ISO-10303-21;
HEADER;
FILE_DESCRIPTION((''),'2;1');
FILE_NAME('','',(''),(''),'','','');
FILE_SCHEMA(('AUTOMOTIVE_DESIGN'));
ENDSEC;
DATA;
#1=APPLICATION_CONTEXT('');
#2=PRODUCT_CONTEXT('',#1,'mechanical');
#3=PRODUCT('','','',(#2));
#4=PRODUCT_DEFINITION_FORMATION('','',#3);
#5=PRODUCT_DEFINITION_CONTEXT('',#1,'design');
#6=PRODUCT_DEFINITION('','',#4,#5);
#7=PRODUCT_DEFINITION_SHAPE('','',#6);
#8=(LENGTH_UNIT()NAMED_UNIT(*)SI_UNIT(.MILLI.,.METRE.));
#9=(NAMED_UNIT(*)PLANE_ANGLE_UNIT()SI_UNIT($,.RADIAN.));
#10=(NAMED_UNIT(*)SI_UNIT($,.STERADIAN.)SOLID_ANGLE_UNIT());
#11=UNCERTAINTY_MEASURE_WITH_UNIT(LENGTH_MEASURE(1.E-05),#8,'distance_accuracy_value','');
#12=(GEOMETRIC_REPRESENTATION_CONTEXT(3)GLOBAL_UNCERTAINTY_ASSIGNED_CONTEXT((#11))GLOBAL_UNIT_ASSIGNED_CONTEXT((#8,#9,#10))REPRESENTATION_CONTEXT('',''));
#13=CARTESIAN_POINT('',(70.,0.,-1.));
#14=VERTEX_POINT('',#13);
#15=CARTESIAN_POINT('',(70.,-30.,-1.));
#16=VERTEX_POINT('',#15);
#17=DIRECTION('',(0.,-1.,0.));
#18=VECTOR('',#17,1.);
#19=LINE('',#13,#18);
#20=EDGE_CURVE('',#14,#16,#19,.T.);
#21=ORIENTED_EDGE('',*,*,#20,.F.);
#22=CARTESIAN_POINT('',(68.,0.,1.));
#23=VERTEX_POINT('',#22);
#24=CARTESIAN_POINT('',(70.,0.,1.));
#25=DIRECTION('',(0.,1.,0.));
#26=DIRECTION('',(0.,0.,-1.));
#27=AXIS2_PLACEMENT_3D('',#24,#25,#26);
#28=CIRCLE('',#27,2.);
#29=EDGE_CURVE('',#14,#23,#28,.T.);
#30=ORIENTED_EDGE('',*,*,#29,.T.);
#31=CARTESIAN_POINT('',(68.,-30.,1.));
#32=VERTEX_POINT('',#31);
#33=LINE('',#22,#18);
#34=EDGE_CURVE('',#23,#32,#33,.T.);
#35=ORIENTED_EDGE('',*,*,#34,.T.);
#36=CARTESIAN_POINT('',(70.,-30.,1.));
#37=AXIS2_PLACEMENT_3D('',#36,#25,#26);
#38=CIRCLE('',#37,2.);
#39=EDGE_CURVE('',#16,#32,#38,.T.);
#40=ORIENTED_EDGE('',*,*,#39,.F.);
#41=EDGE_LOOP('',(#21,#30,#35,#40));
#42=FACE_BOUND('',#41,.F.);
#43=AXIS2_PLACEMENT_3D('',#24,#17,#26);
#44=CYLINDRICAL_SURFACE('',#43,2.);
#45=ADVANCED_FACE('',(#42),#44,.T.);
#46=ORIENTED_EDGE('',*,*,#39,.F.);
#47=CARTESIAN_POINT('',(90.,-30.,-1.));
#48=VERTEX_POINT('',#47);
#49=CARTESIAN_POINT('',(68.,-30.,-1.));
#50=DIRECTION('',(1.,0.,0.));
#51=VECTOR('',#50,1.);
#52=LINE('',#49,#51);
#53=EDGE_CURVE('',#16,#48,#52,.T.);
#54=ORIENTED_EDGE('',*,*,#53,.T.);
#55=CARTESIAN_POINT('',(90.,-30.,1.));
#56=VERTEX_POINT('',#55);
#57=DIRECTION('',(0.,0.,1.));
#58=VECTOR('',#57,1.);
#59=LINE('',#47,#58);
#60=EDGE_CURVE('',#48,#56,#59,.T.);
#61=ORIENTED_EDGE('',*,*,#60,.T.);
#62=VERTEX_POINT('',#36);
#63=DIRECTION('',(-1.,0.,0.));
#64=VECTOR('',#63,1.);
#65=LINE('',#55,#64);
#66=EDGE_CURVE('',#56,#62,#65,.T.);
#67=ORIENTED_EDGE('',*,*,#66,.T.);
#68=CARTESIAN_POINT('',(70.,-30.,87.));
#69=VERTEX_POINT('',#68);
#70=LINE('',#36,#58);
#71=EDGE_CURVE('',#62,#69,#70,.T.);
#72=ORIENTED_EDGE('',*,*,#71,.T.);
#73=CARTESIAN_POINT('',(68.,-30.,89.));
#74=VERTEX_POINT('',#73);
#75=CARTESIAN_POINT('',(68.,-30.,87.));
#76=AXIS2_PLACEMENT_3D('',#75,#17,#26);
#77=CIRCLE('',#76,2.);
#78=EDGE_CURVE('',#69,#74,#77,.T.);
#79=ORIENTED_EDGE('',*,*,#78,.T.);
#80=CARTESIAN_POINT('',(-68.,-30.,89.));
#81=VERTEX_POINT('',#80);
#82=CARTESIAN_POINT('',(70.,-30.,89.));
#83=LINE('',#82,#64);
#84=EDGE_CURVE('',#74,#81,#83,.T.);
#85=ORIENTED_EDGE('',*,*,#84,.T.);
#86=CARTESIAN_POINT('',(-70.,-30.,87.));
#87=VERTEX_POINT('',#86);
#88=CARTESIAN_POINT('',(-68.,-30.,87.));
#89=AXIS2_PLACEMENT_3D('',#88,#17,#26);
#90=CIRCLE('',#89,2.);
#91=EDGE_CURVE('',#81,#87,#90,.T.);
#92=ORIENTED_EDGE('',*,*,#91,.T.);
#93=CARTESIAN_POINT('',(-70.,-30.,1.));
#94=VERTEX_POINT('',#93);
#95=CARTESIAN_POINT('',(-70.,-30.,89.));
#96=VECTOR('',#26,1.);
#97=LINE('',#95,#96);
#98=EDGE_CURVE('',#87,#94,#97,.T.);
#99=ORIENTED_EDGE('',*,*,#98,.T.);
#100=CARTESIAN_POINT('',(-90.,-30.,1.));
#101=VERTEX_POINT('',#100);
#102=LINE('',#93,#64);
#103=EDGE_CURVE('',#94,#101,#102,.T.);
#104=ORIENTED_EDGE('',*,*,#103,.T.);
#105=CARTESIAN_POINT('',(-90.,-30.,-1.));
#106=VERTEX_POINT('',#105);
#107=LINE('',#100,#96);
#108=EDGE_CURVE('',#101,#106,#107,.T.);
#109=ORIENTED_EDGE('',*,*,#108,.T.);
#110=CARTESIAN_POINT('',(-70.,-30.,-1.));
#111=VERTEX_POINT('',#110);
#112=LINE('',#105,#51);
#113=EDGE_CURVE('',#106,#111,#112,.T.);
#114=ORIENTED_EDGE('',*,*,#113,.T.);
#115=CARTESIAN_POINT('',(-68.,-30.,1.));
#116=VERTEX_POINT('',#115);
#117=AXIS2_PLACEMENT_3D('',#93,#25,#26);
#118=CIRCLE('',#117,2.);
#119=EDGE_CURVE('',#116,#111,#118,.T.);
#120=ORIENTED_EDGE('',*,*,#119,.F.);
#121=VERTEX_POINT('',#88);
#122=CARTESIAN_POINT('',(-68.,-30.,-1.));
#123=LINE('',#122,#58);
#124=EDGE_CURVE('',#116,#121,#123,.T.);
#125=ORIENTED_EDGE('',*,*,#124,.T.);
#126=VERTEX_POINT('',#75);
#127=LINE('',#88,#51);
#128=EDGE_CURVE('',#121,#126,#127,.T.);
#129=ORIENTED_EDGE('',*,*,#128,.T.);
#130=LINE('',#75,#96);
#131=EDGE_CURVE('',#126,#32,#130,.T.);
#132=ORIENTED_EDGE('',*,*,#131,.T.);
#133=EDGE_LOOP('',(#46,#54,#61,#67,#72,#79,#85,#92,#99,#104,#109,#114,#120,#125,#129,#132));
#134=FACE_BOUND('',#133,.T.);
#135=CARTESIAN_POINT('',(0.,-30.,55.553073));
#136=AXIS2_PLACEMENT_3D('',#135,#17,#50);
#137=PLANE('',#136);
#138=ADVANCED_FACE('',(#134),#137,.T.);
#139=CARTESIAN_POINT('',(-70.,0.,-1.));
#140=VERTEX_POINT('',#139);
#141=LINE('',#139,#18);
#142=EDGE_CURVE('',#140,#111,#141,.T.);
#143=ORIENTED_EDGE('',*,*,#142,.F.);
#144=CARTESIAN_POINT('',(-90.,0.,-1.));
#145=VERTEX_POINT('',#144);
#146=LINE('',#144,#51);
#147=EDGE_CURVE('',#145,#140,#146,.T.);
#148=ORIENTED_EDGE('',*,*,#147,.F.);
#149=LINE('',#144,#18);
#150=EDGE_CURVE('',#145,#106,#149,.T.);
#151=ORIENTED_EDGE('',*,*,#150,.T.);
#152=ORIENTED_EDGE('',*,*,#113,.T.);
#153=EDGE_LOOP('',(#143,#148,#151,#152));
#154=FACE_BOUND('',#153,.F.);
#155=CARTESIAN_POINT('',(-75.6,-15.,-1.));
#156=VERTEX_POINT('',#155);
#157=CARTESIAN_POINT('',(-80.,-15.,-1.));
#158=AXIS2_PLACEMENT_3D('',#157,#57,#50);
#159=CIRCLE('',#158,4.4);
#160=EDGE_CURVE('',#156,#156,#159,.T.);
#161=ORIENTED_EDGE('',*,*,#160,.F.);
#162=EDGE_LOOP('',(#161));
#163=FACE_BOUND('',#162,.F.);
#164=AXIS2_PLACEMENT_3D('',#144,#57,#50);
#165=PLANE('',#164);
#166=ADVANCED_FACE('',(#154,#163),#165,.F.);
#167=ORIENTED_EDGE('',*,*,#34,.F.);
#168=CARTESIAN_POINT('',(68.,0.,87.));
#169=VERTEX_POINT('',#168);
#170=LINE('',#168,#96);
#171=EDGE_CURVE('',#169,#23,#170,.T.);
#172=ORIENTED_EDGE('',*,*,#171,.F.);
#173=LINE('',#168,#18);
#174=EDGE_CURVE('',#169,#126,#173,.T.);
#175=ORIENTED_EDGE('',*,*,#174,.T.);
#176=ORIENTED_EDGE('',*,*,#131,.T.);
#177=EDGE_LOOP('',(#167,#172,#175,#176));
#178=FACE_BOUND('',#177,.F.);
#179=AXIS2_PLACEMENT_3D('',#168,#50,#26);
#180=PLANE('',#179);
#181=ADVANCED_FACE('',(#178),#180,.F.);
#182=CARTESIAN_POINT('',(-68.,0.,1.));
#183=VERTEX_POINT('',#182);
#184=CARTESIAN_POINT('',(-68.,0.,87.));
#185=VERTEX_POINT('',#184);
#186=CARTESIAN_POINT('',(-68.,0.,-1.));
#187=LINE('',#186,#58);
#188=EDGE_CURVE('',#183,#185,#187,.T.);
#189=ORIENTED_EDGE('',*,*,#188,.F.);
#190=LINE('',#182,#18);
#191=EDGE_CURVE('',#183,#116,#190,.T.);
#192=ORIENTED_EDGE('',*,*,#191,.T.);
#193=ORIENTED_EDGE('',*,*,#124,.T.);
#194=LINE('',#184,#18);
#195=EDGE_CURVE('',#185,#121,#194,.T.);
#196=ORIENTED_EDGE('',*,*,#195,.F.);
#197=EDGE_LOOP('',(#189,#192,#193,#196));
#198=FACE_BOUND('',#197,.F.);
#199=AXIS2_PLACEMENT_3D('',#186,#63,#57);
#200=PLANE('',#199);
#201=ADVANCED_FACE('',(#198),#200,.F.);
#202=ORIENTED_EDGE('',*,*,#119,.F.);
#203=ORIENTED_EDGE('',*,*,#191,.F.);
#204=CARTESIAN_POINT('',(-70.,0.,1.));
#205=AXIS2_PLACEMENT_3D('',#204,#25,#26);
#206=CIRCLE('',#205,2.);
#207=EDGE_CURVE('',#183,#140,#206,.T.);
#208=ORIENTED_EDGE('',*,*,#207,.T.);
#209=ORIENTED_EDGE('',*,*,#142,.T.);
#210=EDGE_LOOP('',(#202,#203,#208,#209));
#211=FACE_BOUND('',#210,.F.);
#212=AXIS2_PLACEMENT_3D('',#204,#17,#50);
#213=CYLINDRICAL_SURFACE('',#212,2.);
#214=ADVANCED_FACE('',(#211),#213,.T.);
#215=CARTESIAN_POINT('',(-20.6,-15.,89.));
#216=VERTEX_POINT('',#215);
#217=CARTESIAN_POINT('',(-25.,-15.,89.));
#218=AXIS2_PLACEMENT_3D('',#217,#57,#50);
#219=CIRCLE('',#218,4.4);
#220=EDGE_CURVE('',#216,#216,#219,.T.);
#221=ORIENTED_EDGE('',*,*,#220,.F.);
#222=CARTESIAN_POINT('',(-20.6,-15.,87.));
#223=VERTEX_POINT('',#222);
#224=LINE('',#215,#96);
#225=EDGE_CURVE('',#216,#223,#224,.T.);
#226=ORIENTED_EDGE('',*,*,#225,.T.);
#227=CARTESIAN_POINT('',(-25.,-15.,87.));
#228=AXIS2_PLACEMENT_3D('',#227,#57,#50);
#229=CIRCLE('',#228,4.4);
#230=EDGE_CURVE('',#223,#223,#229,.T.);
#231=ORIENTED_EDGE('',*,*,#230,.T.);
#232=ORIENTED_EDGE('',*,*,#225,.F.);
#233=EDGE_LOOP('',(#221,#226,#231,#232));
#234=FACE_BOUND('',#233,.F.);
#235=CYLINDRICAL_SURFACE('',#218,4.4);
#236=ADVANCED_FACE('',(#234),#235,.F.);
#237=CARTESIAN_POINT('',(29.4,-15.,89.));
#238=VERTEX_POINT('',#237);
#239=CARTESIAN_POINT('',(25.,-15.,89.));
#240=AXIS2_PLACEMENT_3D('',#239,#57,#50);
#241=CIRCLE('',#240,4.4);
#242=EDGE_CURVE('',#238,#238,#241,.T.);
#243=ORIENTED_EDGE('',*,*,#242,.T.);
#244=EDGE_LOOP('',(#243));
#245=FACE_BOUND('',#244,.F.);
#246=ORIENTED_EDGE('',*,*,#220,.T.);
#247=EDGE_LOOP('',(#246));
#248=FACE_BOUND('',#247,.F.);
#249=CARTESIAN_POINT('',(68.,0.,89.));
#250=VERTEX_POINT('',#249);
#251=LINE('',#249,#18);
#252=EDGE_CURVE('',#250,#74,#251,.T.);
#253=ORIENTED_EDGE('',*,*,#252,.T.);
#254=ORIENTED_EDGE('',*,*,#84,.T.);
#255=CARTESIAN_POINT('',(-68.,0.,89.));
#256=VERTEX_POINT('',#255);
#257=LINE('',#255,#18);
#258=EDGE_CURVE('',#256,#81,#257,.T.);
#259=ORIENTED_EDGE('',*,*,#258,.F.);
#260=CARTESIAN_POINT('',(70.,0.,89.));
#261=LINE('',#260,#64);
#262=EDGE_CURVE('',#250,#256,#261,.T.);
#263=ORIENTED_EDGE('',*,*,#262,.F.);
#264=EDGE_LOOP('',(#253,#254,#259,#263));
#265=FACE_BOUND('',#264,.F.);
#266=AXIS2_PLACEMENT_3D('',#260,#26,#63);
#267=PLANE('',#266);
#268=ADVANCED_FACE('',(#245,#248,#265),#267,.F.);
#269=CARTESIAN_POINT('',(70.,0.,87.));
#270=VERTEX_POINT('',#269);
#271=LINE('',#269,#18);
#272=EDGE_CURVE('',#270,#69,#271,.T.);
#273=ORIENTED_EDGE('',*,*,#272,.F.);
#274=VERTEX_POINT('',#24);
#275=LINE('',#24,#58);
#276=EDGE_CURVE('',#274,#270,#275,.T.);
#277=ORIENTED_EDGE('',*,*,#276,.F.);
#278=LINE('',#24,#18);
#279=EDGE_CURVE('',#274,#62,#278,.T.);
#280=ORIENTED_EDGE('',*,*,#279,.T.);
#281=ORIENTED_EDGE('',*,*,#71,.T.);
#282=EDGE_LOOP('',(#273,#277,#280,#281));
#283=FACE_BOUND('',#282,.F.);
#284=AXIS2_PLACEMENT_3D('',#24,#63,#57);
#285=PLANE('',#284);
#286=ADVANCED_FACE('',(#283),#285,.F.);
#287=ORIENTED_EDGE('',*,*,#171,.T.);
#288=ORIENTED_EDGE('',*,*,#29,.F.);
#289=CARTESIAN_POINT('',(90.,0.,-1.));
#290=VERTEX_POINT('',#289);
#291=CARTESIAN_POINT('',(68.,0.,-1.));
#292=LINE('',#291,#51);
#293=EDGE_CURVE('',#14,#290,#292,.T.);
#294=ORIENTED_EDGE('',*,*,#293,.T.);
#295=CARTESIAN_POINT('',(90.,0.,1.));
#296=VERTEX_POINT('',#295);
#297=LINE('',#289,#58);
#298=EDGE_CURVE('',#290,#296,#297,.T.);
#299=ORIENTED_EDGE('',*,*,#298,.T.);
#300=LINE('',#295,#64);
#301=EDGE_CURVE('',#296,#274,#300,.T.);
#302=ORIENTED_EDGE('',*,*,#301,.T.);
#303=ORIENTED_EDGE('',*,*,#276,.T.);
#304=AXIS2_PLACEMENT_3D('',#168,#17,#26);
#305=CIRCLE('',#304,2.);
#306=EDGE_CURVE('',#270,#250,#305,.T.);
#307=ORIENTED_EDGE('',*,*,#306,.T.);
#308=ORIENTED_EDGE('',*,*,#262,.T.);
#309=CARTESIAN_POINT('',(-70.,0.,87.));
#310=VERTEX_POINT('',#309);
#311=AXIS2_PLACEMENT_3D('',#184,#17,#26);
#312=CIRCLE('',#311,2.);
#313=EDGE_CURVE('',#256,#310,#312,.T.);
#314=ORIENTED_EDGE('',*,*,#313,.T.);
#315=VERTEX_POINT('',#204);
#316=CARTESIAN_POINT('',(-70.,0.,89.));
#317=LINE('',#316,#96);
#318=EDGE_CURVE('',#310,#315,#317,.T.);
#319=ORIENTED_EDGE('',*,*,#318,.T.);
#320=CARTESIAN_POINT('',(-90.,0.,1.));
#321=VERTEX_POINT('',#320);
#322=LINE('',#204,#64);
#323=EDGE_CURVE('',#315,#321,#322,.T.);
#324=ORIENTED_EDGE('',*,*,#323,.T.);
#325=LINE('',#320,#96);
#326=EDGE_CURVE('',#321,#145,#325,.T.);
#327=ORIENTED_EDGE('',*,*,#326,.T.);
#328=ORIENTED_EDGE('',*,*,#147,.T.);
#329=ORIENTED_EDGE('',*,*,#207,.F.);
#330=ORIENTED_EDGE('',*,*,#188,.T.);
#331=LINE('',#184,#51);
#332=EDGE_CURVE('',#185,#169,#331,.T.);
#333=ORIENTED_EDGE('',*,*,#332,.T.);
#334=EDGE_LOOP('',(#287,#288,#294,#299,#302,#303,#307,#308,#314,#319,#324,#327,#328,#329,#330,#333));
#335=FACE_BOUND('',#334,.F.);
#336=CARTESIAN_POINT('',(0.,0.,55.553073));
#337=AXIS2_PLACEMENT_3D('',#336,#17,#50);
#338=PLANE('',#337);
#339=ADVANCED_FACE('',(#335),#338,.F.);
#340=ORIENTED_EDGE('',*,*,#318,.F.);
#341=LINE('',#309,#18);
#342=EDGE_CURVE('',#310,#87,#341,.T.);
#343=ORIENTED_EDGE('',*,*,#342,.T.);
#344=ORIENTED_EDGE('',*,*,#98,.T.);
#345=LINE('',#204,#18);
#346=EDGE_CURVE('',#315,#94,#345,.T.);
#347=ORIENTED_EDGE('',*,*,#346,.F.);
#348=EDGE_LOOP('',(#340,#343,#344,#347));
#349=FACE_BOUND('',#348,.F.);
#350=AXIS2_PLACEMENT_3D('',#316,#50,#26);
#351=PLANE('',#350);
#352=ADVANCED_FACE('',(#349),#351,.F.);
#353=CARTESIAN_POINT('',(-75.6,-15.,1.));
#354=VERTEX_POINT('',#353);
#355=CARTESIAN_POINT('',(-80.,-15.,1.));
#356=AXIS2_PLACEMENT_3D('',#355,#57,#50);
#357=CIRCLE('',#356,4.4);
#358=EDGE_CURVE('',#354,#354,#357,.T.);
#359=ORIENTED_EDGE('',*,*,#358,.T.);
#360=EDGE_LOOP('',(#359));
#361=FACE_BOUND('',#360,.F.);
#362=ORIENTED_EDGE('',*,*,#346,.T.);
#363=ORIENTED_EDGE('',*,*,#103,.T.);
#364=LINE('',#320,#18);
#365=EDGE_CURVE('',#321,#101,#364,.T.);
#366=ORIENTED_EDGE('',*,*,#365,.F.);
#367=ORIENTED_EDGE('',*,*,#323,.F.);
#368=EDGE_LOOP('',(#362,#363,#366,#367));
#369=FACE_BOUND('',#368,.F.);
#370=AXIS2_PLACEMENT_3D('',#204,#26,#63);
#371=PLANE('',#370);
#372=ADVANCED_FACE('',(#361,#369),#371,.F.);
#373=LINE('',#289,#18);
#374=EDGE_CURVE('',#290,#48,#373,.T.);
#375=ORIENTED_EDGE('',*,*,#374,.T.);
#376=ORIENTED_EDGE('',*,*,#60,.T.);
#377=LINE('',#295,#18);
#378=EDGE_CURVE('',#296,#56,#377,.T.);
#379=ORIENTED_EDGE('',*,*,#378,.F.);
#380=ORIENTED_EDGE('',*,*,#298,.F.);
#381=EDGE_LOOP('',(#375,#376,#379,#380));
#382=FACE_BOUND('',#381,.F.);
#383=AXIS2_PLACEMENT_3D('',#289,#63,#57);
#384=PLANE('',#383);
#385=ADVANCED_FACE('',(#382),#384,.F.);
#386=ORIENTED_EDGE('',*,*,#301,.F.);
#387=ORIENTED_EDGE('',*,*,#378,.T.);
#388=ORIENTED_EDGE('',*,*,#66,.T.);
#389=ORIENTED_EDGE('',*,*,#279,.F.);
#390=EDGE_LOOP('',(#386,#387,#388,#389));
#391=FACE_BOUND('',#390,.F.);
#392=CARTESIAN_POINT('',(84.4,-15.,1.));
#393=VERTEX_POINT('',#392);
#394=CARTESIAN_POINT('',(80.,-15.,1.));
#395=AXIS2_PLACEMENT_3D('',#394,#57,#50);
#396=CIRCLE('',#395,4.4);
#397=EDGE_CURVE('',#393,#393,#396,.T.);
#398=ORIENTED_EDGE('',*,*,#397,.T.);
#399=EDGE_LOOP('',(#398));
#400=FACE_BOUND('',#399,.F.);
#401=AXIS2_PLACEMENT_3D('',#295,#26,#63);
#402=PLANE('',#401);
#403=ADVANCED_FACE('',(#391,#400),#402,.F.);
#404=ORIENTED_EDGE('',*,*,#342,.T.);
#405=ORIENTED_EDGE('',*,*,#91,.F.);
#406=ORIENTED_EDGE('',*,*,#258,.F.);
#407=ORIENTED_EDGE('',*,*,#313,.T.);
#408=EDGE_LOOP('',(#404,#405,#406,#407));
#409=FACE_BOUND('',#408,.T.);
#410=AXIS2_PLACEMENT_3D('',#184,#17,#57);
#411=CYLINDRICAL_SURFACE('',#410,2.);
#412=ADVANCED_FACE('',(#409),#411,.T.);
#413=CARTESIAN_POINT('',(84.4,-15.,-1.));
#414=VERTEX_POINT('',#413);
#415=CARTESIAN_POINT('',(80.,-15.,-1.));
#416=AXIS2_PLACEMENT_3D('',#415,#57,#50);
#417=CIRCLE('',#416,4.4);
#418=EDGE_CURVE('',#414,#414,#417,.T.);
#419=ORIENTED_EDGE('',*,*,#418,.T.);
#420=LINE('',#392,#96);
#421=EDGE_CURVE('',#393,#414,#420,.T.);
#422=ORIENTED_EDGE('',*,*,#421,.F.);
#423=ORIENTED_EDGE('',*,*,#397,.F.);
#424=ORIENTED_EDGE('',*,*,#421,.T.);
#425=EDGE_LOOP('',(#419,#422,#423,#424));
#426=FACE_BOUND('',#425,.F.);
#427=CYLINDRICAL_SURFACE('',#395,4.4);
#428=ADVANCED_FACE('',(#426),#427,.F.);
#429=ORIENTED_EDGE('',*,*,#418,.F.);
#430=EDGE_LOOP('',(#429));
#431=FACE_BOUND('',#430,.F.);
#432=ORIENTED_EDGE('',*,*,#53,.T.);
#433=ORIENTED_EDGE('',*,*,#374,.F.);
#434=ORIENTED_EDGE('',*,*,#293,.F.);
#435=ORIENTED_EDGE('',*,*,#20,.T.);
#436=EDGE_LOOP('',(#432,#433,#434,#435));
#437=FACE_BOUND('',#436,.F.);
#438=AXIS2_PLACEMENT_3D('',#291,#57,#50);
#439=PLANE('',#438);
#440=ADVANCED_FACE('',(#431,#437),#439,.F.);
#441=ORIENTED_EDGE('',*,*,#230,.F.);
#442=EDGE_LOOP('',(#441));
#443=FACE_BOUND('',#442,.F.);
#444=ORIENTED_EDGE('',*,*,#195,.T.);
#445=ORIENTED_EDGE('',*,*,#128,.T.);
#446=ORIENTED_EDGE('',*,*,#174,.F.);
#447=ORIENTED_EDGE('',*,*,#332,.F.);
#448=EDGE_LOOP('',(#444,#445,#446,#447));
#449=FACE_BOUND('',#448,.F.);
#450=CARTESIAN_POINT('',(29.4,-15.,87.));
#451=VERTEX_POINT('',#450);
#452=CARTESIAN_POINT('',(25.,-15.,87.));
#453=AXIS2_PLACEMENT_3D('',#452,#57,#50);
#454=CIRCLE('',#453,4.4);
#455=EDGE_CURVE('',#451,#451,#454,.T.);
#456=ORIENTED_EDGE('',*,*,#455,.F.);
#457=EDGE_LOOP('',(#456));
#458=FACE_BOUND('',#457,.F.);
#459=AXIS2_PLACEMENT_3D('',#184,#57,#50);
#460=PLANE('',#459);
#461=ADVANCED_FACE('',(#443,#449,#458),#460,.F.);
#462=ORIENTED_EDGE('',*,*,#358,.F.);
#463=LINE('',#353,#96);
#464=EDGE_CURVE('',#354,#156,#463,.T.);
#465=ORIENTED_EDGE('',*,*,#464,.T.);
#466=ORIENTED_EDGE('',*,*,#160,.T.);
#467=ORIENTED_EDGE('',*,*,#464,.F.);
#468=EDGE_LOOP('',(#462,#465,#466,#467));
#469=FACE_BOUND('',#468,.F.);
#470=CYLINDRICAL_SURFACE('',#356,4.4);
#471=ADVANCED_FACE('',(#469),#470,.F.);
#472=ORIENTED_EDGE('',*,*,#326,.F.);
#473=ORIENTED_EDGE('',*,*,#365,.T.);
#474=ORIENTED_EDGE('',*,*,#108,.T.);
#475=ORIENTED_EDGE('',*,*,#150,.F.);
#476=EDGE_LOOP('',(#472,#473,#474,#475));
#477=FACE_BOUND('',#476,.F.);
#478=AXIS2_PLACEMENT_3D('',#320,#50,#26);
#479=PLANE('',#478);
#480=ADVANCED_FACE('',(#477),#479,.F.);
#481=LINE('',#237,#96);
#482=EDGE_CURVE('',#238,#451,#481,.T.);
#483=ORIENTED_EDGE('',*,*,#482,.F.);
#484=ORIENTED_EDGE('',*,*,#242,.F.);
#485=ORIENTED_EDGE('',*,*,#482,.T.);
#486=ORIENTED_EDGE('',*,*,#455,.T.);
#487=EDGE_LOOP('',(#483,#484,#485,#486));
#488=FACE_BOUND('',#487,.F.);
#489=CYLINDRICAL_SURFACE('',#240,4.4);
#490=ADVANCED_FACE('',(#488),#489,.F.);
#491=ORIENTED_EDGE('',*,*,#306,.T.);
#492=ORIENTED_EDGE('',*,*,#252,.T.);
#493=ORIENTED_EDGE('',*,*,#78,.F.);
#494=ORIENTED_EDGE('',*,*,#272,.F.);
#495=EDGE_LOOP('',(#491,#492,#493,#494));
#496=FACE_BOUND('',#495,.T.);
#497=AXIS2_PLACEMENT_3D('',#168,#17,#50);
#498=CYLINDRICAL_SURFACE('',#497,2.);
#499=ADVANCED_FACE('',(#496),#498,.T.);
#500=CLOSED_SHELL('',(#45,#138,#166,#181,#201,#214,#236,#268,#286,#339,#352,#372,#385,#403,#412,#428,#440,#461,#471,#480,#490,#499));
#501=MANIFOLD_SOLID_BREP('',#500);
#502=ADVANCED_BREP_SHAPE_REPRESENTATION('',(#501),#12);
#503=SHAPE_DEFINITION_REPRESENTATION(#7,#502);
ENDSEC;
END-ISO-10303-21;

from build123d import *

# Parameters (mm, degrees)
F1_DEPTH = 30
F2_R     = 4.4
F3_R     = 4.4
F4_DEPTH = 25
F5_R     = 2
F6_R     = 2


# Not quite as in the source:
# - a feature names something its author has since deleted; it is built from what else it names


with BuildPart() as f1:
    # F0 (on Front) → F1 (new body)
    with BuildSketch(Plane.XZ):
        Polygon((90, -1), (90, 1), (70, 1), (70, 89), (-70, 89), (-70, 1), (-90, 1), (-90, -1), (-68, -1), (-68, 87), (68, 87), (68, -1), align=None)
    extrude(amount=F1_DEPTH)

    # F2 (on face) + F3 (on face) → F4 (cut)
    with BuildSketch(Plane.XY.offset(1)):
        with Locations((-80, -15)):
            Circle(F2_R)
        with Locations((80, -15)):
            Circle(F2_R)
    with BuildSketch(Plane.XY.offset(89)):
        with Locations((-25, -15)):
            Circle(F3_R)
        with Locations((25, -15)):
            Circle(F3_R)
    extrude(amount=-F4_DEPTH, mode=Mode.SUBTRACT)

    # F5
    f5_edges = [f1.edges().sort_by_distance(p)[0] for p in [
        (-70, -15, 89),
        (70, -15, 89),
    ]]
    fillet(f5_edges, radius=F5_R)

    # F6
    f6_edges = [f1.edges().sort_by_distance(p)[0] for p in [
        (68, -15, -1),
        (-68, -15, -1),
    ]]
    fillet(f6_edges, radius=F6_R)


solid = f1.part
